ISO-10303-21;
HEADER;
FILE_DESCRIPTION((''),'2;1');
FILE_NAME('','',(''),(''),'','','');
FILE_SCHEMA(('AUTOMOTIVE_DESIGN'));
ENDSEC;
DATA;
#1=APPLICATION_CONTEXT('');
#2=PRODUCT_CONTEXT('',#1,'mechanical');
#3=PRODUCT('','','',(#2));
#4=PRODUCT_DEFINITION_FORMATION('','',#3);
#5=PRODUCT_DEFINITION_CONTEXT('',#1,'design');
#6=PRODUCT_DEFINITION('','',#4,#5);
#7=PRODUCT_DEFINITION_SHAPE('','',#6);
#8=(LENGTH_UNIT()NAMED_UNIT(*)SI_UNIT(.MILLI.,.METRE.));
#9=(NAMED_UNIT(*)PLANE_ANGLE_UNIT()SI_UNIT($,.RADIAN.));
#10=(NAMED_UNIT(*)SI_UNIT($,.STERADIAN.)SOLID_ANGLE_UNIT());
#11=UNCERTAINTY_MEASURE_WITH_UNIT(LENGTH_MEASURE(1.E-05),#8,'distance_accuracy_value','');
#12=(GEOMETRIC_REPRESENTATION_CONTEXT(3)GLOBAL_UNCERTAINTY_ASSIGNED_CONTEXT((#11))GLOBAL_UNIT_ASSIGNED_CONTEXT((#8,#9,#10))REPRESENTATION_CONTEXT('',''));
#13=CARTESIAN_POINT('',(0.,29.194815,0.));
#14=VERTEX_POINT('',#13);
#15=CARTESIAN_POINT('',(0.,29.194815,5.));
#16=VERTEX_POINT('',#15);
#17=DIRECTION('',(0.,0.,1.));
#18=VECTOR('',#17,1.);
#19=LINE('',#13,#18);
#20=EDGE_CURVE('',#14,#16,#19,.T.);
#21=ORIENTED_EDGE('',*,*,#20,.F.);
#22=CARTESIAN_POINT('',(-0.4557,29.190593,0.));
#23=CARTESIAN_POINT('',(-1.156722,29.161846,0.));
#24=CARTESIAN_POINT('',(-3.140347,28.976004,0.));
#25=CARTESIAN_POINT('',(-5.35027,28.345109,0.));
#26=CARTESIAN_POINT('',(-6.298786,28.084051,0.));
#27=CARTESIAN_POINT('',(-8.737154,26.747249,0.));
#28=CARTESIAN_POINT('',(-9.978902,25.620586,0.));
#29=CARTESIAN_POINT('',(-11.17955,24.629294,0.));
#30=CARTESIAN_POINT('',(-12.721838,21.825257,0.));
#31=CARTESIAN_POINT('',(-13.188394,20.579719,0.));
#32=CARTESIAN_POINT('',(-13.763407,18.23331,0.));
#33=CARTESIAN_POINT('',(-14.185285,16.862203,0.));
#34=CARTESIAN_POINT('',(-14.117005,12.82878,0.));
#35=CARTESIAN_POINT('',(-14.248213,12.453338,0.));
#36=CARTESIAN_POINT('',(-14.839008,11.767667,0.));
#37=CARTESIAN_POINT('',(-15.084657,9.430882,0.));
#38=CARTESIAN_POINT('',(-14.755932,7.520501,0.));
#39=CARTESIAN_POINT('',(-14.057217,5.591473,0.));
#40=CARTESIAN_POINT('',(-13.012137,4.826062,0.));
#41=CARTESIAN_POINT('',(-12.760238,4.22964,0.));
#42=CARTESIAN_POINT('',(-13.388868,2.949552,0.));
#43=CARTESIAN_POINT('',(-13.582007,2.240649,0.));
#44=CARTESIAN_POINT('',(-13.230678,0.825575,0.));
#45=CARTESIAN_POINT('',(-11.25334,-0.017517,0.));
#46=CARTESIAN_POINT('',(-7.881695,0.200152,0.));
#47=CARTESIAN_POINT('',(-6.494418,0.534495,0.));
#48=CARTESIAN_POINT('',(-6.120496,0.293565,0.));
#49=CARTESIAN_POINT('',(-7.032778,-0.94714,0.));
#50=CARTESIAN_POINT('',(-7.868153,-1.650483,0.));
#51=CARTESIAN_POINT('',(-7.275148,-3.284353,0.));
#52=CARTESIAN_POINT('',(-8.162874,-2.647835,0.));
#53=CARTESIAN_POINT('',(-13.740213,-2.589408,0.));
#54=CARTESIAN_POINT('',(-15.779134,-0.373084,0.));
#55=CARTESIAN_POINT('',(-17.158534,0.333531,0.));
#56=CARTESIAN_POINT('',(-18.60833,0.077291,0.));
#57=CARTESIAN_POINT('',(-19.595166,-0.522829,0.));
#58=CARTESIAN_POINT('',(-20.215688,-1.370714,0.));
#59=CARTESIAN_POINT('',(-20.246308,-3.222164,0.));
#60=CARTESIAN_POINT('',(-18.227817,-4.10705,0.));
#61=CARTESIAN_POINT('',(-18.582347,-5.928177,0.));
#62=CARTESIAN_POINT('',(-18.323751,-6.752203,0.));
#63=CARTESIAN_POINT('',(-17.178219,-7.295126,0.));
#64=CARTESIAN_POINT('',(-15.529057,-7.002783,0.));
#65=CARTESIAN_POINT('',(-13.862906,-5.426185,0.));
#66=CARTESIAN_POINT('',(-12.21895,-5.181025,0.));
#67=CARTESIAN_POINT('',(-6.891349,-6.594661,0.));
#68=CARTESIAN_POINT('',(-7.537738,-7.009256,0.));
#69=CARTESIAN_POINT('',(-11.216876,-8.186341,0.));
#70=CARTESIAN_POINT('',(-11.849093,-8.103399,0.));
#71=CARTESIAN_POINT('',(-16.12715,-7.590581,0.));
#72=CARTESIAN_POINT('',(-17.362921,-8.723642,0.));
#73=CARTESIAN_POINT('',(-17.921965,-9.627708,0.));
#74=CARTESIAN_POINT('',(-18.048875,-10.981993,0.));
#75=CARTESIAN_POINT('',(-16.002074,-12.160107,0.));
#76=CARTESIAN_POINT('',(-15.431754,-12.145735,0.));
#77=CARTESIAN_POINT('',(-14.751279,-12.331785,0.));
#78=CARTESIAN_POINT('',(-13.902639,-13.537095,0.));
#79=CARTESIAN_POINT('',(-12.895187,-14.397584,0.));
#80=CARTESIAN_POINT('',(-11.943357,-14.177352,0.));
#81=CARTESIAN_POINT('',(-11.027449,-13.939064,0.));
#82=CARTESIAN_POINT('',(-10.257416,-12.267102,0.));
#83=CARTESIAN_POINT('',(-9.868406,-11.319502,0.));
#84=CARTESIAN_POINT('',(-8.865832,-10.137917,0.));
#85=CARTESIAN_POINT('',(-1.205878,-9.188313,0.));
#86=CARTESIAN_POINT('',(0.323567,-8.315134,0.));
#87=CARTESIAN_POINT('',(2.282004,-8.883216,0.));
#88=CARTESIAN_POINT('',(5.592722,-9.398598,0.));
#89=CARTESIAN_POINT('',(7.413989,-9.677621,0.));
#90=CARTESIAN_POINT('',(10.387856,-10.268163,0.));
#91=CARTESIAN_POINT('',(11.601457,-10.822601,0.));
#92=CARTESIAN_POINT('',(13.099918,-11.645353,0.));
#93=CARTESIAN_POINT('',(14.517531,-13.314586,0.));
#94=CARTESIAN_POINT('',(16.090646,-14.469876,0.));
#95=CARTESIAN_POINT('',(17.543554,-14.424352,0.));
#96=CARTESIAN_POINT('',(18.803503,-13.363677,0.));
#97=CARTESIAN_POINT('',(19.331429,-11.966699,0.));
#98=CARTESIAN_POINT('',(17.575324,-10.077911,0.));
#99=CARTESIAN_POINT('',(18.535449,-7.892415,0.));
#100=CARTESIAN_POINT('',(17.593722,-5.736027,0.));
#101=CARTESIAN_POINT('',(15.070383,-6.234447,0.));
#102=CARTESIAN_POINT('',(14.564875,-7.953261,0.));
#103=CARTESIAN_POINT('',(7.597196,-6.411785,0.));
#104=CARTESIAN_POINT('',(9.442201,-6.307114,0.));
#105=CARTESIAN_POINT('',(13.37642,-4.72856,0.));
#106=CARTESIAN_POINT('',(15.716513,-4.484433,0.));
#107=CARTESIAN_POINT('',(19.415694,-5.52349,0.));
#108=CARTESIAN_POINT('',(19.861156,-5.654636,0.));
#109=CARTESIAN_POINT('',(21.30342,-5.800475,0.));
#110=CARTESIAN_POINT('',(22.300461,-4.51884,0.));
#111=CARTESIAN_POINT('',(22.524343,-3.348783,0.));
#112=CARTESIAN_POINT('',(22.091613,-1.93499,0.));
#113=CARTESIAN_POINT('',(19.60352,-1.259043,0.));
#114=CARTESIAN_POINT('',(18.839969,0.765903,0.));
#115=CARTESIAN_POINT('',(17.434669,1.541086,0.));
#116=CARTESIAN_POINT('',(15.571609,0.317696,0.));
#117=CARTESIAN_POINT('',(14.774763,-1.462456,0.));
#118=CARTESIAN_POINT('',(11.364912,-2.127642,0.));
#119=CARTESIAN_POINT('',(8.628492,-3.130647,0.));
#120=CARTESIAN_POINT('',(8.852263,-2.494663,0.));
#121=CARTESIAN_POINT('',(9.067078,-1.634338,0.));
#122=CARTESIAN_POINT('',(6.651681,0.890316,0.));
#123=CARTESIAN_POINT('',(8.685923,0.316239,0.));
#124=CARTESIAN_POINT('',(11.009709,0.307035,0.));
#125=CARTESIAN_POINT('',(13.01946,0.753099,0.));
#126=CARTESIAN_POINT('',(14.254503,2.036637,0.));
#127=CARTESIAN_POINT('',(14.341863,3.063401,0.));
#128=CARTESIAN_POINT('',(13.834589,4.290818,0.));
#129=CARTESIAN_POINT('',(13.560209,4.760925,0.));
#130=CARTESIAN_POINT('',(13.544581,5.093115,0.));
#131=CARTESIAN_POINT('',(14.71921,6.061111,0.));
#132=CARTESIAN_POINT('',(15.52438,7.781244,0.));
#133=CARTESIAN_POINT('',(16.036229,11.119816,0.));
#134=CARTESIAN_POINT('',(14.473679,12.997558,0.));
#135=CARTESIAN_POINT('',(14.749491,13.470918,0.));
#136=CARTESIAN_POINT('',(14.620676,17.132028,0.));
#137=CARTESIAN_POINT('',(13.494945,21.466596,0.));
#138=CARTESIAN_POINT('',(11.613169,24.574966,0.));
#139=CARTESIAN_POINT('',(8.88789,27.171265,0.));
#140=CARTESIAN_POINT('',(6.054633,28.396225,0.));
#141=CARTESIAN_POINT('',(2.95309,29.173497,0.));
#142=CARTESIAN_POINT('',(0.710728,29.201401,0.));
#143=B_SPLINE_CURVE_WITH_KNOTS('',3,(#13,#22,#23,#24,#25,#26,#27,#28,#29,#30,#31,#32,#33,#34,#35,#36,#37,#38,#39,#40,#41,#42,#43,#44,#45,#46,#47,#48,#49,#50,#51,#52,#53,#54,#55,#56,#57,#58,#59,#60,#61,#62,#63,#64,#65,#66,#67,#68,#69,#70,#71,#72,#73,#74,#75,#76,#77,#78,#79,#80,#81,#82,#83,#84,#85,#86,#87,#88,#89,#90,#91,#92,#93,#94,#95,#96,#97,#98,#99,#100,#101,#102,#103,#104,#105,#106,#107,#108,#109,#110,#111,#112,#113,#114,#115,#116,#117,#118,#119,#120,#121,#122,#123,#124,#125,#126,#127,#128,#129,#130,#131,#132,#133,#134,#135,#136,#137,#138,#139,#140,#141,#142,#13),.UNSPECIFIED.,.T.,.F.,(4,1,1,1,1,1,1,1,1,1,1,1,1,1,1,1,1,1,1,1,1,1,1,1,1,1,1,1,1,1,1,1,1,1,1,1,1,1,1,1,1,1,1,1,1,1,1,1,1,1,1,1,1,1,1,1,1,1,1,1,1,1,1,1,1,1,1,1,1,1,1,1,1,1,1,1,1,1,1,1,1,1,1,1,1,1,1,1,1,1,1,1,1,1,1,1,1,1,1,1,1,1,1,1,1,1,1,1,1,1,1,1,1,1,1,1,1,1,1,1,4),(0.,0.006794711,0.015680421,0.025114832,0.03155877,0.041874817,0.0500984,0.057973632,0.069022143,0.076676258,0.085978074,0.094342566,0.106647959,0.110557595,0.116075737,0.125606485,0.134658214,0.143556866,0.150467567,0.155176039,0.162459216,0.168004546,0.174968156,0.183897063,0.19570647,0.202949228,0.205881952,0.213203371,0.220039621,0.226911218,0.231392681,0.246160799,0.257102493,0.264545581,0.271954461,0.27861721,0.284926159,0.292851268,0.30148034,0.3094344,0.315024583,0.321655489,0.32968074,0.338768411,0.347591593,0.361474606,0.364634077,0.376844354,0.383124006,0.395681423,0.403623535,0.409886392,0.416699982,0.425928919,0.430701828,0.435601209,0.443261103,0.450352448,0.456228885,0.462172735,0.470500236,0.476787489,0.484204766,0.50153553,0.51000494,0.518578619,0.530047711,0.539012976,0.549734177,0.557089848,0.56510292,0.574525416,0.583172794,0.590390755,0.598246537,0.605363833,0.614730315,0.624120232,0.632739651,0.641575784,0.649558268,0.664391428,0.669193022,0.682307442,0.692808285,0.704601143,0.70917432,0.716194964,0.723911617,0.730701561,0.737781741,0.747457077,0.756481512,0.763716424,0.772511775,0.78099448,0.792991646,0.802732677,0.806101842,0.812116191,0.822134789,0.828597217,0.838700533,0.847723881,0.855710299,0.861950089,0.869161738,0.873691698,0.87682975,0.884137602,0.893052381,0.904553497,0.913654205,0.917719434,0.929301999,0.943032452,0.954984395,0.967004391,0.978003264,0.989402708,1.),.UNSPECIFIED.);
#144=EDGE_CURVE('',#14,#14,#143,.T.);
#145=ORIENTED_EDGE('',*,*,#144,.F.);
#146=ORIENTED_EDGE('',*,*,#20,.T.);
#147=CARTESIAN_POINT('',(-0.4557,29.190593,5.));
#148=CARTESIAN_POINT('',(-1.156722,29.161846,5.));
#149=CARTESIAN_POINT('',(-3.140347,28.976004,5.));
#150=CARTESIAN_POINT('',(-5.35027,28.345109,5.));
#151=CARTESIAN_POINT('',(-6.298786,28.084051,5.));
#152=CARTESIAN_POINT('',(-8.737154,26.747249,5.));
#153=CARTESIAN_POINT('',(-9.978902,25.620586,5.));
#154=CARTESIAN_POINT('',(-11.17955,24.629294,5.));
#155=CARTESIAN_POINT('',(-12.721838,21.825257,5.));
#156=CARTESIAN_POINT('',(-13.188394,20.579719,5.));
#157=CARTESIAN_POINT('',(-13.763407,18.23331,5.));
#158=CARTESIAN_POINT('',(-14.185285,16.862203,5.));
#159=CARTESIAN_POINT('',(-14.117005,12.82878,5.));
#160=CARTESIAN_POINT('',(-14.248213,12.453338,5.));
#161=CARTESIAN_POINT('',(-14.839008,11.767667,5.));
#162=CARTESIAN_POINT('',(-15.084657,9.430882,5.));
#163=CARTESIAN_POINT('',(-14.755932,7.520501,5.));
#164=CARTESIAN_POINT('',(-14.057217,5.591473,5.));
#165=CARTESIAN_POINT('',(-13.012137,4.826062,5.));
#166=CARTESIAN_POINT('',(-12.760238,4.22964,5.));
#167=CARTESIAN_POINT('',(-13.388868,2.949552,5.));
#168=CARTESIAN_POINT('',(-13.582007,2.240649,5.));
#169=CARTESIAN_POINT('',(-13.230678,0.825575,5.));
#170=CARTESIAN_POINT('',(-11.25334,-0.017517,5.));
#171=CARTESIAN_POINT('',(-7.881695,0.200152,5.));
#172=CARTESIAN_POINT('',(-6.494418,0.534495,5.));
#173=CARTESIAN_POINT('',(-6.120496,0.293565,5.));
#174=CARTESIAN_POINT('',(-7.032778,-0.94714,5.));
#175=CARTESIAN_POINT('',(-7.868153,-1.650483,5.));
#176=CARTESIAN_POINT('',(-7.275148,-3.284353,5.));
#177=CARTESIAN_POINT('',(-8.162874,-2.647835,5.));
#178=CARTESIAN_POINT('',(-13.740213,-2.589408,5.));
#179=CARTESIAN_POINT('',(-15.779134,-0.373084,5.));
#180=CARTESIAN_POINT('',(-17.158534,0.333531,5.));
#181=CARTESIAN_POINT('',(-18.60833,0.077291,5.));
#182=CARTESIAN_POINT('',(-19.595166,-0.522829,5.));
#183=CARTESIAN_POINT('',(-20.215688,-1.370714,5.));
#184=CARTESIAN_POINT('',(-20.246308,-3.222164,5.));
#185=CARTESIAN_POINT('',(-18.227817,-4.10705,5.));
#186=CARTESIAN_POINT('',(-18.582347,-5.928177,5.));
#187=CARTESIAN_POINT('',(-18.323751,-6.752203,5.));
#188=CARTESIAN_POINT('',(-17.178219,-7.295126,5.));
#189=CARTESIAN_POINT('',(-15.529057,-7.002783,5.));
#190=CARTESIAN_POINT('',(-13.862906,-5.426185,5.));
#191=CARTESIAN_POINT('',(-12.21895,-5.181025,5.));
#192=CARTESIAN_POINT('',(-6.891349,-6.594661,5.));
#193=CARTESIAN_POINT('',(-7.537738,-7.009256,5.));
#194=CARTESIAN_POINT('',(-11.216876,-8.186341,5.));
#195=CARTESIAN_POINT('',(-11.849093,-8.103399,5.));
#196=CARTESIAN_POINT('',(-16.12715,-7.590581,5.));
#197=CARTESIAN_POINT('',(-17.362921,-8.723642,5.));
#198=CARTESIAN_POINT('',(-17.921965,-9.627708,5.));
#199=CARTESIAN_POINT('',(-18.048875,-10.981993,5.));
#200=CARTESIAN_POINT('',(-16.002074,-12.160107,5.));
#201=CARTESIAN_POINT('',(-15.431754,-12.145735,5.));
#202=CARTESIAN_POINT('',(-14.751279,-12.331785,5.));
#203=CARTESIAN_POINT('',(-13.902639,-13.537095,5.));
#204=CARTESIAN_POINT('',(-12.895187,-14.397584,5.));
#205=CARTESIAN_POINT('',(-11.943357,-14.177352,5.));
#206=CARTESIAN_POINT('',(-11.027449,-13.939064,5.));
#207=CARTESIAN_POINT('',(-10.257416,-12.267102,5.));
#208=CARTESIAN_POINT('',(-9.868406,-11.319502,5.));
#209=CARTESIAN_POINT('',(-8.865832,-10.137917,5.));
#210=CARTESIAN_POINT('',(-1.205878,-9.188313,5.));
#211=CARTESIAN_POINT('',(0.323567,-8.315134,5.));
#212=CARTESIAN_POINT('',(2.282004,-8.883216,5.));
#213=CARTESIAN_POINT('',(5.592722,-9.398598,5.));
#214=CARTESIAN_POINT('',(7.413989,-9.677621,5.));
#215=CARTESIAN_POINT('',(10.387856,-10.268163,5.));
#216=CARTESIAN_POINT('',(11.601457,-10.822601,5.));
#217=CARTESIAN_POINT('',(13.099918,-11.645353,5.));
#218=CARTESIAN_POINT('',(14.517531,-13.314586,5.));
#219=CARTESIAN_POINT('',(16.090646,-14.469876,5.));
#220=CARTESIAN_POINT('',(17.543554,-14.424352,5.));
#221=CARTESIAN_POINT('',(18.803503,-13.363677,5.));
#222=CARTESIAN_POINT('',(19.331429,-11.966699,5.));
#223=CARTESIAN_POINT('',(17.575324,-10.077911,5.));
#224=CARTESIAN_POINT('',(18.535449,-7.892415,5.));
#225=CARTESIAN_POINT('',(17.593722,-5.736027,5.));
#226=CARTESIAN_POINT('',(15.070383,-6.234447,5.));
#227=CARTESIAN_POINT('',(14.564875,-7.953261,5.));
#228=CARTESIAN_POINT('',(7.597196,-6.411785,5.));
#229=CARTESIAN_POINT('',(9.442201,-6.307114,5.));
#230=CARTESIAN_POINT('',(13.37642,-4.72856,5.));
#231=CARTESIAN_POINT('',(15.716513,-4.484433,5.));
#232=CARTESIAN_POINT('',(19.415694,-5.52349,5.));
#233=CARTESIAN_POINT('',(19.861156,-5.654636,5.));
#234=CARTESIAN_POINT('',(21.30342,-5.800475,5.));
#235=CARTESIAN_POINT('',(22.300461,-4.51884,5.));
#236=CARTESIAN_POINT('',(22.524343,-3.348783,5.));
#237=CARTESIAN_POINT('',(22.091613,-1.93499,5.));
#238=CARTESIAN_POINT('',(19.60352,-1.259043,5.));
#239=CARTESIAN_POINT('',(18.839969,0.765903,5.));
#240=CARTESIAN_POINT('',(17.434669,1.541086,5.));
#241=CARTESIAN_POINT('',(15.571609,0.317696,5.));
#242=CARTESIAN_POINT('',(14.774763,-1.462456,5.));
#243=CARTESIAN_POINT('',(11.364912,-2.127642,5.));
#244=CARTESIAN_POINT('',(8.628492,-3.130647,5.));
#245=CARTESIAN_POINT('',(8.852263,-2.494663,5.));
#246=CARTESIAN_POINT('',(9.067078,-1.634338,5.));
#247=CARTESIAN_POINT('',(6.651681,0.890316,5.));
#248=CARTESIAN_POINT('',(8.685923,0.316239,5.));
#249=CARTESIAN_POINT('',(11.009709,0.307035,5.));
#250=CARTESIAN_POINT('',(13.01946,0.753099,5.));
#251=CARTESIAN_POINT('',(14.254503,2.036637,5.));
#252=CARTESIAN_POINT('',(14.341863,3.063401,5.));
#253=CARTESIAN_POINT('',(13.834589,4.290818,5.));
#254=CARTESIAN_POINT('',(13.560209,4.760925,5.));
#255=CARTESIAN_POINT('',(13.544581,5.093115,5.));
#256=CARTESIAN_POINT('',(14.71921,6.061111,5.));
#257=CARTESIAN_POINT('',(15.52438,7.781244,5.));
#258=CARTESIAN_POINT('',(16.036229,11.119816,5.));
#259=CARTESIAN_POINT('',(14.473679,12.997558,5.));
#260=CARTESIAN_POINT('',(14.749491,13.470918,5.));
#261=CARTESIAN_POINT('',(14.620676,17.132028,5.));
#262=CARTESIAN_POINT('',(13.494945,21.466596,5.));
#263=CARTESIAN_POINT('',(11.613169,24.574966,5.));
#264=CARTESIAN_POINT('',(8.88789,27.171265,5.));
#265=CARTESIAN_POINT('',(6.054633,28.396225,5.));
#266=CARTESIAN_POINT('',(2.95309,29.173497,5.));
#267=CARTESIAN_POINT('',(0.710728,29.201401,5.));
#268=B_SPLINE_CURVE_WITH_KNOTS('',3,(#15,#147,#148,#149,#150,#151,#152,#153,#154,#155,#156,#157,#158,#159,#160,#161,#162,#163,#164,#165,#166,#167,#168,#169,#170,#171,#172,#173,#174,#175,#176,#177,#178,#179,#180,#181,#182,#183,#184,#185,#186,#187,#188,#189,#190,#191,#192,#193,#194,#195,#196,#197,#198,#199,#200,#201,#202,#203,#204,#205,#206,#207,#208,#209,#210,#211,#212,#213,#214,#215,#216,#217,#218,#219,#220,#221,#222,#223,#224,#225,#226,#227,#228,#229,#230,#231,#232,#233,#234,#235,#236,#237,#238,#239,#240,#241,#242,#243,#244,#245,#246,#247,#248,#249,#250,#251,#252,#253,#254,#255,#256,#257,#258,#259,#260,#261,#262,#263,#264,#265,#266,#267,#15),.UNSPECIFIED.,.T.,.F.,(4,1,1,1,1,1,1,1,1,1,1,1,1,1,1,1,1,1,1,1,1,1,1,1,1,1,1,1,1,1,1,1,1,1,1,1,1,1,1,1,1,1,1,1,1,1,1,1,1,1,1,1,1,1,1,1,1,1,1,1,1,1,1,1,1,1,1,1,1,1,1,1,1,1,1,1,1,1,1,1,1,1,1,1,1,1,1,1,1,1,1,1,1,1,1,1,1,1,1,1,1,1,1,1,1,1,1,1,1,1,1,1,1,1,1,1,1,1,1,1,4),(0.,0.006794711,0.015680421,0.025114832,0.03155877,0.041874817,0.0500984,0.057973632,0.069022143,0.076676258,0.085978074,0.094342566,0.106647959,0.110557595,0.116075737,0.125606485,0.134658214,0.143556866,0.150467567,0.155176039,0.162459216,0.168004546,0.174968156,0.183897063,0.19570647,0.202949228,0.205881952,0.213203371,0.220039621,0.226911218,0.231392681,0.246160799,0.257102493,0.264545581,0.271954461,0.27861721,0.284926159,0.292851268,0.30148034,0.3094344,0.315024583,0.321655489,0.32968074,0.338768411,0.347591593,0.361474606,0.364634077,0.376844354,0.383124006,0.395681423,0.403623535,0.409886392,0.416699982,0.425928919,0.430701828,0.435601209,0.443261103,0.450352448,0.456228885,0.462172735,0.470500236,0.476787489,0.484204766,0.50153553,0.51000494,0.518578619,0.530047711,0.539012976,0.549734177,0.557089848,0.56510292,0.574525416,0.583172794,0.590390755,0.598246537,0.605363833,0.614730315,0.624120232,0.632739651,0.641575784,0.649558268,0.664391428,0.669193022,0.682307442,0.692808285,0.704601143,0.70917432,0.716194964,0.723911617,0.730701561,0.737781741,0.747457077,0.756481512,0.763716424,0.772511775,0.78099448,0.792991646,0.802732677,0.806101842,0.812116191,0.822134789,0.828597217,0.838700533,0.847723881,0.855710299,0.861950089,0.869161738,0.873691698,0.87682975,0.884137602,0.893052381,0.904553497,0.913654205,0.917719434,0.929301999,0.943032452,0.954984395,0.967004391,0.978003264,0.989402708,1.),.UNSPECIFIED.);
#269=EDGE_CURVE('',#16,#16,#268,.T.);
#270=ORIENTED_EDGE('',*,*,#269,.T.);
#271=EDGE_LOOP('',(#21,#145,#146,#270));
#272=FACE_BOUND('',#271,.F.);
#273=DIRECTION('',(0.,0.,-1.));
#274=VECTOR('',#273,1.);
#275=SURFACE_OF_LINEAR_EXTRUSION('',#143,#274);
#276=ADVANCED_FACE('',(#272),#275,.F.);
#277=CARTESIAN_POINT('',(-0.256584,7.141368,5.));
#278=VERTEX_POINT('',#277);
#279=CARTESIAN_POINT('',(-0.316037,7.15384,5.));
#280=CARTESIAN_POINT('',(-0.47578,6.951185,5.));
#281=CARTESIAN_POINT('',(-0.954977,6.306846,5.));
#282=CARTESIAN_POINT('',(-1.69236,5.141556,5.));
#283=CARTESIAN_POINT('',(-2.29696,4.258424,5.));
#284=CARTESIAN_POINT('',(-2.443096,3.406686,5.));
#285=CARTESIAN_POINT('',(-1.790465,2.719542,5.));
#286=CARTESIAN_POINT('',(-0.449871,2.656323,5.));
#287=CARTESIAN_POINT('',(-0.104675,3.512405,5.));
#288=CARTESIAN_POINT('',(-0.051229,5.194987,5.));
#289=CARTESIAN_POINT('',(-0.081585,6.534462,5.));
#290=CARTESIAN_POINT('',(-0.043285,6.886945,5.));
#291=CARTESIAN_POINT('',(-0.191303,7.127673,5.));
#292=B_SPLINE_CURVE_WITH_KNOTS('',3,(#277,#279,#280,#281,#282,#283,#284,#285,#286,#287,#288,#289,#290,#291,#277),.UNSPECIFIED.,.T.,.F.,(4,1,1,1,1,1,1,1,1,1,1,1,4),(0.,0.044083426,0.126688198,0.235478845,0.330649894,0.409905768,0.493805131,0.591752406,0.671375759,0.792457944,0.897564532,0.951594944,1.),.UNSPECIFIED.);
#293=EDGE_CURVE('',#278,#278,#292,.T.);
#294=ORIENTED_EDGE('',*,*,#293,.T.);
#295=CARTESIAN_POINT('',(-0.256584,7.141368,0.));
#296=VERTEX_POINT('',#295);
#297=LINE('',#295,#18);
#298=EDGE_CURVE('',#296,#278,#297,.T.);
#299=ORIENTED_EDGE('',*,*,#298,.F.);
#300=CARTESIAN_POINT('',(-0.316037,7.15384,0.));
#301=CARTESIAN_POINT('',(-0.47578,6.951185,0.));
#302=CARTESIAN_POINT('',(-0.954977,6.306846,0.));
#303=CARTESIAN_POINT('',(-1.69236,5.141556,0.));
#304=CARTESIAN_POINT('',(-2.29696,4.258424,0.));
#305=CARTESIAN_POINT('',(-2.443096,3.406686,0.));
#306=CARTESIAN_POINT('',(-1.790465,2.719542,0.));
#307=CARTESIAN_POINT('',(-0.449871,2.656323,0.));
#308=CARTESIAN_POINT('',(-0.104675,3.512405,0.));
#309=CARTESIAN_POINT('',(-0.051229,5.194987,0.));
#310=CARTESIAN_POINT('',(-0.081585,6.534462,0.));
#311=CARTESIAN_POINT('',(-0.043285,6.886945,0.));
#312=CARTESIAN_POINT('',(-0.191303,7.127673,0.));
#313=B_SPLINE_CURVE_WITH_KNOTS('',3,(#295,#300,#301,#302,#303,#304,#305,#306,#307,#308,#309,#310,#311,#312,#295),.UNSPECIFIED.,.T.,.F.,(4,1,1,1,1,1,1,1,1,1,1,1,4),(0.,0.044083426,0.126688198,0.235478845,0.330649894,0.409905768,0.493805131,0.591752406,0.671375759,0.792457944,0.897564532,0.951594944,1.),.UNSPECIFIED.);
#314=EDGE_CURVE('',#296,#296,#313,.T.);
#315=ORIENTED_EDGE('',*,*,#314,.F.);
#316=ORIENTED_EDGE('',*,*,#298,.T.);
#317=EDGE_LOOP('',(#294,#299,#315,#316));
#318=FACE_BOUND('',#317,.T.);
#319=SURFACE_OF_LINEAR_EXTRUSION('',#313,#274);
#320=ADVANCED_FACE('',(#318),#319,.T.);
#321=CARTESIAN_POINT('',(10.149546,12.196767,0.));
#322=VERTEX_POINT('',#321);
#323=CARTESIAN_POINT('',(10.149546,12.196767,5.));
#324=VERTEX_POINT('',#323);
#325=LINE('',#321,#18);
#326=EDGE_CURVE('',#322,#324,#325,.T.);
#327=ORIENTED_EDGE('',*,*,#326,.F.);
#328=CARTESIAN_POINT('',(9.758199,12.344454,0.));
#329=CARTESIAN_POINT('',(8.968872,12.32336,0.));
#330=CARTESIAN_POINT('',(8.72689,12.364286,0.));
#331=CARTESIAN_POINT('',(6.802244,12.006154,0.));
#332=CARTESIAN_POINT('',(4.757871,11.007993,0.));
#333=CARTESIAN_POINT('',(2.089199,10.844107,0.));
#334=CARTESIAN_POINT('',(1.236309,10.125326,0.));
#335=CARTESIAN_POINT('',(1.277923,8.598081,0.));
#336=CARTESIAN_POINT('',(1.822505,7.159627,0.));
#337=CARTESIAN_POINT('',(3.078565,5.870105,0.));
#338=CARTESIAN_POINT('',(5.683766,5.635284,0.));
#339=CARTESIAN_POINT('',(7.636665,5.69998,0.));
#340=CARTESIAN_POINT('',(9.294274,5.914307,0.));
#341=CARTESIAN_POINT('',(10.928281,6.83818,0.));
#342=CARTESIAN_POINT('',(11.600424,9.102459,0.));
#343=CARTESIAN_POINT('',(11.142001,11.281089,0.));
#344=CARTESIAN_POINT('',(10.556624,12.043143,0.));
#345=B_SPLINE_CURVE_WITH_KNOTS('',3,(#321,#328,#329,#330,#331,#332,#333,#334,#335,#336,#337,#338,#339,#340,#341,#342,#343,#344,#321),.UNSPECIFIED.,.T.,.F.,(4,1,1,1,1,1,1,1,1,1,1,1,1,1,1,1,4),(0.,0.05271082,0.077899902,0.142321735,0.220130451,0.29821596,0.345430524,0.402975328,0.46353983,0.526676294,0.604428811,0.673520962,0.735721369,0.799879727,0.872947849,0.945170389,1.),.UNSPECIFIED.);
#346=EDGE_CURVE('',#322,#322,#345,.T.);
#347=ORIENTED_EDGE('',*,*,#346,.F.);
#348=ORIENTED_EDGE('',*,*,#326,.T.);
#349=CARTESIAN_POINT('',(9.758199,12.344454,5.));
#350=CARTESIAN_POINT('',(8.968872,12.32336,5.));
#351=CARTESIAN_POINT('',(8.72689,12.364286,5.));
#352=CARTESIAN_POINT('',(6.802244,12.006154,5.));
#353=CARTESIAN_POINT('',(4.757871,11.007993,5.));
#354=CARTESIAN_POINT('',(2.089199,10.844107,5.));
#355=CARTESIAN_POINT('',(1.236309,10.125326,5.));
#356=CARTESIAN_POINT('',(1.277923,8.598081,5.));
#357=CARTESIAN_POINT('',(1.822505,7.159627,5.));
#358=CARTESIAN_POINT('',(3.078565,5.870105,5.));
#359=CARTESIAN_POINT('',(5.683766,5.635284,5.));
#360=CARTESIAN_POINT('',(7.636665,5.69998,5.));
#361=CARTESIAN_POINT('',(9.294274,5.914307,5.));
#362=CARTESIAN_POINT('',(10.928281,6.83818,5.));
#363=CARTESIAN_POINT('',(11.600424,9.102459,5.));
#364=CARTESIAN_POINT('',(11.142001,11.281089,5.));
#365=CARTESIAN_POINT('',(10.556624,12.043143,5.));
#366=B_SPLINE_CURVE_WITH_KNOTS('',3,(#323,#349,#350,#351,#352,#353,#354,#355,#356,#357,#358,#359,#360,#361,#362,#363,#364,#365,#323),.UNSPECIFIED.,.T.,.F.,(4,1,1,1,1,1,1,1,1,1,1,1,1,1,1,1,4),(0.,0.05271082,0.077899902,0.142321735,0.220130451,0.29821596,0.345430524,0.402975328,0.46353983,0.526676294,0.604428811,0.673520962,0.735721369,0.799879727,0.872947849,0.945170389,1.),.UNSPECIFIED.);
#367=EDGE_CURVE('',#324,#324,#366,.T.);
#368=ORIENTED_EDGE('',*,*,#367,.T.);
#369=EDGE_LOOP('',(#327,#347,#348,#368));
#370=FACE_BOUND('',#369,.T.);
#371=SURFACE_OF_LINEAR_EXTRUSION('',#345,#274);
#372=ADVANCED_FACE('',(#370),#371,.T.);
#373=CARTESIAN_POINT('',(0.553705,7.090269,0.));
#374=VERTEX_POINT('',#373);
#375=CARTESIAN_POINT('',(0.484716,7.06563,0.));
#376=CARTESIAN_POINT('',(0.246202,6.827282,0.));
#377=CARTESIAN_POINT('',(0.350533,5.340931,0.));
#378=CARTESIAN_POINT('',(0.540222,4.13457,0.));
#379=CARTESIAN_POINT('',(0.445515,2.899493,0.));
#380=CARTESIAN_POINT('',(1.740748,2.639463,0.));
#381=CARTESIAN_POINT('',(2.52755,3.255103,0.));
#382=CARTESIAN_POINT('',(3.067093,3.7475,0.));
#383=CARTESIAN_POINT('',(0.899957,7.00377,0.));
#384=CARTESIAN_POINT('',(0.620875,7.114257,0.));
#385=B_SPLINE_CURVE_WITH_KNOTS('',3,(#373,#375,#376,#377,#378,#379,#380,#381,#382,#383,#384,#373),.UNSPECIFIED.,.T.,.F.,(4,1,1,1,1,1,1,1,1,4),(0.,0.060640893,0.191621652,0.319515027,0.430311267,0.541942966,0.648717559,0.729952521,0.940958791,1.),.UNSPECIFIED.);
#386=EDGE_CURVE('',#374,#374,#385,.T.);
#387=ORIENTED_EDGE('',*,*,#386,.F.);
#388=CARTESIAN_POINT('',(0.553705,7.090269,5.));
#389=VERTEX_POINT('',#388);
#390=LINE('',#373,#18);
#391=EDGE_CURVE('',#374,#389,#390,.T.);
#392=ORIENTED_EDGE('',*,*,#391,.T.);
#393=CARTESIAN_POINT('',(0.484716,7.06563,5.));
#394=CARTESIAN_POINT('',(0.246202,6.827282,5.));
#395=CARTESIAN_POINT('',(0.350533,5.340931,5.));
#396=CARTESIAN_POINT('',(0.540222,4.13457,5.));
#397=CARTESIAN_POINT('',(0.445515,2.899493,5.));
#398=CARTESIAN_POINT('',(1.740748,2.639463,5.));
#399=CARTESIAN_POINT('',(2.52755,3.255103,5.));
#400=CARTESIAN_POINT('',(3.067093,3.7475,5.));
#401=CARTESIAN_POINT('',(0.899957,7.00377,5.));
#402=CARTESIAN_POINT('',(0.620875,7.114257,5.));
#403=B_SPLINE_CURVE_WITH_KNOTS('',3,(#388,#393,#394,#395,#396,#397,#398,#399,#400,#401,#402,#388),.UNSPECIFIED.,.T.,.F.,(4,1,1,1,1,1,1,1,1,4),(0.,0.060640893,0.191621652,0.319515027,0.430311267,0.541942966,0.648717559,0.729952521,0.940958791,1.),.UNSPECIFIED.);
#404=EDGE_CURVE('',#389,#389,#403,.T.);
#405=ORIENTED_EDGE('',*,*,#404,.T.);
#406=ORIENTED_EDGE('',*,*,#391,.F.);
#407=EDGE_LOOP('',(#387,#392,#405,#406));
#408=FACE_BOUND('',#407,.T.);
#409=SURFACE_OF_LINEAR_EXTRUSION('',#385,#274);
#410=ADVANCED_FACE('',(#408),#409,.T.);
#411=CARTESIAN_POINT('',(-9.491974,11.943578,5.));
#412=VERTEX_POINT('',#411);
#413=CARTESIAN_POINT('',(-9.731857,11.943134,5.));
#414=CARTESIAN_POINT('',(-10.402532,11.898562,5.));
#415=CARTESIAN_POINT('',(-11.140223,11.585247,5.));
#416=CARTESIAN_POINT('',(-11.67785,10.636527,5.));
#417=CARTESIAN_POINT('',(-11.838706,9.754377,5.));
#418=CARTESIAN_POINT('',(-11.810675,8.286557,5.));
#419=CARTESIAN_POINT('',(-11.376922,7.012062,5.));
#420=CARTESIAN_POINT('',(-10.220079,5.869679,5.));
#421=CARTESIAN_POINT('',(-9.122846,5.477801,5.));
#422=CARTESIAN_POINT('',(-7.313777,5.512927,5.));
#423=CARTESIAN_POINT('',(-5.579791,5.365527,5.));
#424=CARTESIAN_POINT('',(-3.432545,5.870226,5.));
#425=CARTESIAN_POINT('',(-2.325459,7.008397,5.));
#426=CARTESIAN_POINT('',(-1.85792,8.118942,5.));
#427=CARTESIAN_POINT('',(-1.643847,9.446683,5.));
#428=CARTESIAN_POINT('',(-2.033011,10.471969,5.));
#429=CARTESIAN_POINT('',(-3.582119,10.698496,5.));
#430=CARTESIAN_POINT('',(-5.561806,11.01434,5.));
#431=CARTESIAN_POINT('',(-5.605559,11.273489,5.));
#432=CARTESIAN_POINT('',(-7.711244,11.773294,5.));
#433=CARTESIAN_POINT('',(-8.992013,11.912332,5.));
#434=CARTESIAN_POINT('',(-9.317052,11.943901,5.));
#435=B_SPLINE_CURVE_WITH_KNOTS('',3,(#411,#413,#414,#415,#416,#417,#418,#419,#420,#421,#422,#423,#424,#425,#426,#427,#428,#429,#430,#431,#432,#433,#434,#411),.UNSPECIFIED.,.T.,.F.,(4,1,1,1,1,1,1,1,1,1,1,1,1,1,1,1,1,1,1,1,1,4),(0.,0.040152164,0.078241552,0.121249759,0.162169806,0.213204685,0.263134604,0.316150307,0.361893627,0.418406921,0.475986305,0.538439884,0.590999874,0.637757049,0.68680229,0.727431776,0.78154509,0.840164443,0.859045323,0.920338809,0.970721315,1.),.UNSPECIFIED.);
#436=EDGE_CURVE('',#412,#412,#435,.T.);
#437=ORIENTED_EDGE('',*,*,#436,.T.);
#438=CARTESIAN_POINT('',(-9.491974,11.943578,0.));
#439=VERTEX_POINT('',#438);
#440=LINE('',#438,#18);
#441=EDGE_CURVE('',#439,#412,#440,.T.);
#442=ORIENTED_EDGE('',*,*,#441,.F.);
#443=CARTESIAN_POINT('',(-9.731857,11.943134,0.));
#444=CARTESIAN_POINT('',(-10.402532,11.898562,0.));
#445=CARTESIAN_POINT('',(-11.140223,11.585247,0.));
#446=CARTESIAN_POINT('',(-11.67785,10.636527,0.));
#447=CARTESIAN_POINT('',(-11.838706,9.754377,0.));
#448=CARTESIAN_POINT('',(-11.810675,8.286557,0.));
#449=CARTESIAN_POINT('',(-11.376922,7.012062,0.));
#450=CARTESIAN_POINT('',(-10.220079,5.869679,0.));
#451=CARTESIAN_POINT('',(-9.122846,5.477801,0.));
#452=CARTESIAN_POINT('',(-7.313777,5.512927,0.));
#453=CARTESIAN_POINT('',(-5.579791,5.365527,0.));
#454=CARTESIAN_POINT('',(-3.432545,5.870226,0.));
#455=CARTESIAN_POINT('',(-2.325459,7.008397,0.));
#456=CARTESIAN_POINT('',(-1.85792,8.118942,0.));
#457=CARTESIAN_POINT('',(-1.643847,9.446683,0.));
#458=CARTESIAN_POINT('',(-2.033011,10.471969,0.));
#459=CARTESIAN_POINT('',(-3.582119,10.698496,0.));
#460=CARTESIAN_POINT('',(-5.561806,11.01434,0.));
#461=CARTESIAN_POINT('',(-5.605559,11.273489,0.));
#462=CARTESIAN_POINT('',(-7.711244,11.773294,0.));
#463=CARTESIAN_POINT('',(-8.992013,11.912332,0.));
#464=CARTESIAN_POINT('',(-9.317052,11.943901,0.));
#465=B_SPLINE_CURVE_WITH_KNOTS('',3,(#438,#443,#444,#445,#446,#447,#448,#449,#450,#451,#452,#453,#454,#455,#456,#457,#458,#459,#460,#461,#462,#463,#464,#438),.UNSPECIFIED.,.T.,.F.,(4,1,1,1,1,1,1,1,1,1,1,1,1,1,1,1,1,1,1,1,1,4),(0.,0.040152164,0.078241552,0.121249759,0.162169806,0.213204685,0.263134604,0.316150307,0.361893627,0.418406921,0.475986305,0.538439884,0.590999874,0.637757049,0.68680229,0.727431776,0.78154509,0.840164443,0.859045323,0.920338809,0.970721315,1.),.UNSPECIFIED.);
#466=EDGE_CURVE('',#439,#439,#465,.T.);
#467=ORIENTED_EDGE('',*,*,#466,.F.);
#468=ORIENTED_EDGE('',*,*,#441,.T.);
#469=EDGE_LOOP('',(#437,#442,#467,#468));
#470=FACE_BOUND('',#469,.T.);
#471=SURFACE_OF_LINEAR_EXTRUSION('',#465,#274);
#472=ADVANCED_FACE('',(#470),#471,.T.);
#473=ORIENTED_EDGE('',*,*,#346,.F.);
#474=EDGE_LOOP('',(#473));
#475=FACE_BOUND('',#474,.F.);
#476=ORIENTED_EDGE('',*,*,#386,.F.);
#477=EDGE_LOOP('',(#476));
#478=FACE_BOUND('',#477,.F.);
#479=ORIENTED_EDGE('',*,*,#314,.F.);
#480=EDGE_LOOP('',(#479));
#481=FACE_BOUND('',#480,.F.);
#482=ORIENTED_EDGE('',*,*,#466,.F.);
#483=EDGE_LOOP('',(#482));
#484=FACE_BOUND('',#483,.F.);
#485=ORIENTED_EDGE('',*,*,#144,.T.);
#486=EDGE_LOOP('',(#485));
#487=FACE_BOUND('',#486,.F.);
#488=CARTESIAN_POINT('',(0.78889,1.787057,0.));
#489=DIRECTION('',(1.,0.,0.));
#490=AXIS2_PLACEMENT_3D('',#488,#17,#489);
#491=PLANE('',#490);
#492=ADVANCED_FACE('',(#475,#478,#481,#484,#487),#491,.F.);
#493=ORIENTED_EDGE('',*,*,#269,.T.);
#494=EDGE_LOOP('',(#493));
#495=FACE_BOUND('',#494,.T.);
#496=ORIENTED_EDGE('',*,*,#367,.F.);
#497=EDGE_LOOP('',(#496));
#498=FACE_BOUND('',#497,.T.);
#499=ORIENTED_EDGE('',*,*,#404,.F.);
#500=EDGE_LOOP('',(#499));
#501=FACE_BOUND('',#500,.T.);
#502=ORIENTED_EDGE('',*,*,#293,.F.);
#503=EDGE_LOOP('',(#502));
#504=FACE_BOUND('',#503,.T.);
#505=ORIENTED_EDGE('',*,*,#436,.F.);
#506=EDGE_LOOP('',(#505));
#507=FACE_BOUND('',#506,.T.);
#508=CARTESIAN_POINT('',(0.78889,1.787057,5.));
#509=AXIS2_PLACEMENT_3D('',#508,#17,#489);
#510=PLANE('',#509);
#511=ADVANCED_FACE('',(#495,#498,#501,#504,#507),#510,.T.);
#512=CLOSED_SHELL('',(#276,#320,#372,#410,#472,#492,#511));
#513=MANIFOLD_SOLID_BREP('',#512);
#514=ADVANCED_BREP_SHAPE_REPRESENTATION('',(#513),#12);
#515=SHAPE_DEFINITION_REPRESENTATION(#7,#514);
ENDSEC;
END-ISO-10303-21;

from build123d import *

# Parameters (mm, degrees)
F2_DEPTH = 5


# Not quite as in the source:
# - the program builds the solid bodies; features that only make, move or delete a surface that nothing else refers to are left out


with BuildPart() as f2:
    # F0 (on Top) → F2 (new body)
    with BuildSketch(Plane.XY):
        with BuildLine():
            add(Edge.make_bspline(
                [(0, 29.1948150843), (-0.455700376, 29.1905925458), (-1.1567215924, 29.1618461529), (-3.1403467697, 28.9760038822), (-5.3502695562, 28.3451092019), (-6.2987855508, 28.08405076), (-8.7371541954, 26.7472490664), (-9.9789020308, 25.6205862946), (-11.1795496875, 24.6292942159), (-12.7218376486, 21.8252572969), (-13.1883939862, 20.579718657), (-13.7634070057, 18.2333096853), (-14.1852851071, 16.8622027364), (-14.1170047877, 12.8287797099), (-14.2482133356, 12.4533380127), (-14.8390084605, 11.7676672429), (-15.0846571902, 9.4308819888), (-14.7559319963, 7.5205014424), (-14.0572172751, 5.5914730666), (-13.0121365975, 4.8260616544), (-12.7602375114, 4.229640466), (-13.3888684676, 2.9495519697), (-13.5820065327, 2.2406487992), (-13.2306782333, 0.8255751981), (-11.2533403548, -0.0175168629), (-7.8816952761, 0.2001522646), (-6.4944183105, 0.5344949605), (-6.1204957666, 0.2935652285), (-7.0327782743, -0.9471395034), (-7.8681534364, -1.650483246), (-7.2751479554, -3.2843527943), (-8.1628741959, -2.6478349983), (-13.7402125566, -2.5894083194), (-15.7791340083, -0.3730836673), (-17.1585341356, 0.3335309748), (-18.6083298281, 0.0772907355), (-19.5951663859, -0.5228293797), (-20.2156875042, -1.3707138004), (-20.2463078231, -3.2221635924), (-18.2278171957, -4.1070504005), (-18.5823469671, -5.9281770774), (-18.3237505227, -6.7522032766), (-17.1782189553, -7.2951260169), (-15.5290572679, -7.0027828669), (-13.8629059388, -5.4261850537), (-12.2189503414, -5.1810247155), (-6.8913491283, -6.5946613819), (-7.5377381272, -7.0092561754), (-11.2168759239, -8.1863406129), (-11.8490931224, -8.1033994548), (-16.1271497353, -7.5905806702), (-17.3629207849, -8.7236417952), (-17.9219651644, -9.6277084995), (-18.0488749277, -10.9819934587), (-16.0020742728, -12.1601073407), (-15.4317544768, -12.1457345363), (-14.7512786345, -12.3317850721), (-13.9026392621, -13.5370953675), (-12.8951873314, -14.3975838856), (-11.9433573754, -14.177352226), (-11.0274493069, -13.9390642999), (-10.2574160991, -12.2671019175), (-9.8684058522, -11.3195018224), (-8.8658318822, -10.1379170413), (-1.2058784185, -9.1883129388), (0.3235668746, -8.3151335086), (2.2820035826, -8.8832158896), (5.5927219878, -9.3985978575), (7.4139892784, -9.6776207077), (10.3878555066, -10.2681628014), (11.6014567723, -10.8226010538), (13.0999184497, -11.645353175), (14.5175313676, -13.3145860992), (16.0906457526, -14.4698757402), (17.5435543548, -14.4243517005), (18.8035028973, -13.3636768778), (19.3314294433, -11.9666989236), (17.5753238972, -10.0779106532), (18.5354487794, -7.8924152647), (17.5937222417, -5.7360265957), (15.0703828771, -6.234446849), (14.5648753095, -7.953261075), (7.5971964752, -6.4117846293), (9.442200865, -6.3071141647), (13.3764202735, -4.7285595175), (15.716513279, -4.4844330359), (19.4156937792, -5.5234901434), (19.861155828, -5.6546360397), (21.303419766, -5.8004753827), (22.300460868, -4.518839727), (22.5243431369, -3.3487826511), (22.0916128896, -1.9349896886), (19.6035203653, -1.2590429946), (18.8399693891, 0.765903237), (17.4346694984, 1.5410863929), (15.5716090748, 0.3176959724), (14.7747626125, -1.4624555319), (11.3649118248, -2.1276417927), (8.6284919308, -3.1306467762), (8.8522629011, -2.4946634527), (9.0670777263, -1.6343380568), (6.6516812, 0.8903161082), (8.6859227155, 0.3162393757), (11.0097092584, 0.3070352004), (13.019460402, 0.7530993219), (14.2545025425, 2.0366374807), (14.3418632854, 3.0634006451), (13.8345888548, 4.2908181196), (13.5602088632, 4.7609245882), (13.5445813704, 5.0931152788), (14.7192104011, 6.0611113985), (15.5243795175, 7.7812436707), (16.0362288926, 11.1198158729), (14.473678678, 12.9975581843), (14.749490572, 13.4709184724), (14.6206756183, 17.1320281508), (13.4949448137, 21.4665955495), (11.613169172, 24.5749660361), (8.8878900036, 27.1712648948), (6.0546332528, 28.3962254244), (2.9530896675, 29.173496563), (0.7107278145, 29.2014007177), (0, 29.1948150843)],
                knots=[0, 0, 0, 0, 0.0067947108, 0.0156804207, 0.0251148324, 0.0315587701, 0.0418748165, 0.0500983998, 0.0579736325, 0.0690221426, 0.0766762585, 0.0859780744, 0.0943425662, 0.1066479587, 0.1105575947, 0.1160757372, 0.1256064852, 0.1346582143, 0.1435568663, 0.1504675672, 0.1551760394, 0.162459216, 0.1680045462, 0.1749681561, 0.1838970634, 0.19570647, 0.2029492284, 0.2058819519, 0.2132033711, 0.220039621, 0.2269112182, 0.2313926808, 0.2461607994, 0.2571024927, 0.264545581, 0.2719544608, 0.2786172102, 0.2849261587, 0.2928512682, 0.3014803403, 0.3094344002, 0.3150245827, 0.3216554892, 0.3296807402, 0.3387684105, 0.3475915932, 0.3614746058, 0.3646340772, 0.3768443544, 0.383124006, 0.3956814227, 0.403623535, 0.4098863918, 0.416699982, 0.4259289189, 0.4307018278, 0.4356012085, 0.4432611025, 0.4503524484, 0.4562288853, 0.4621727355, 0.4705002364, 0.4767874895, 0.4842047659, 0.5015355296, 0.5100049396, 0.5185786191, 0.5300477109, 0.5390129764, 0.5497341771, 0.5570898483, 0.5651029201, 0.5745254162, 0.5831727936, 0.5903907555, 0.598246537, 0.6053638329, 0.614730315, 0.6241202322, 0.6327396515, 0.641575784, 0.6495582683, 0.6643914285, 0.6691930217, 0.682307442, 0.6928082846, 0.7046011432, 0.7091743205, 0.7161949635, 0.7239116167, 0.7307015612, 0.7377817415, 0.7474570773, 0.7564815119, 0.7637164238, 0.7725117749, 0.7809944805, 0.7929916457, 0.8027326768, 0.8061018421, 0.8121161908, 0.8221347891, 0.828597217, 0.8387005328, 0.8477238813, 0.8557102992, 0.8619500889, 0.8691617381, 0.8736916981, 0.8768297501, 0.8841376024, 0.8930523815, 0.9045534974, 0.9136542049, 0.917719434, 0.929301999, 0.9430324516, 0.9549843951, 0.9670043906, 0.9780032637, 0.9894027079, 1, 1, 1, 1], degree=3))
        make_face()
        with BuildLine():
            add(Edge.make_bspline(
                [(-0.256584317, 7.141367998), (-0.3160373469, 7.1538403671), (-0.4757799103, 6.9511854635), (-0.9549769091, 6.3068464939), (-1.6923599308, 5.1415561247), (-2.2969604587, 4.2584240453), (-2.4430958311, 3.4066857737), (-1.7904651594, 2.7195420637), (-0.4498707313, 2.6563231111), (-0.1046752505, 3.5124050288), (-0.0512294187, 5.1949870786), (-0.0815848313, 6.5344615874), (-0.0432850893, 6.8869453377), (-0.1913029283, 7.1276729251), (-0.256584317, 7.141367998)],
                knots=[0, 0, 0, 0, 0.0440834259, 0.1266881981, 0.2354788451, 0.3306498943, 0.4099057678, 0.4938051313, 0.5917524056, 0.6713757591, 0.7924579444, 0.8975645323, 0.9515949438, 1, 1, 1, 1], degree=3))
        make_face(mode=Mode.SUBTRACT)
        with BuildLine():
            add(Edge.make_bspline(
                [(0.5537052057, 7.0902686566), (0.4847157086, 7.065629918), (0.2462017696, 6.8272821787), (0.3505334284, 5.3409308334), (0.5402222252, 4.1345701722), (0.4455145051, 2.8994930838), (1.7407481462, 2.6394633793), (2.5275495977, 3.2551031165), (3.0670934574, 3.747499506), (0.899957098, 7.0037701506), (0.6208747848, 7.1142574343), (0.5537052057, 7.0902686566)],
                knots=[0, 0, 0, 0, 0.0606408934, 0.1916216523, 0.3195150268, 0.4303112671, 0.541942966, 0.6487175585, 0.729952521, 0.9409587914, 1, 1, 1, 1], degree=3))
        make_face(mode=Mode.SUBTRACT)
        with BuildLine():
            add(Edge.make_bspline(
                [(-9.4919735566, 11.9435777888), (-9.731856646, 11.9431339793), (-10.4025316241, 11.8985617041), (-11.1402226353, 11.585247135), (-11.6778499919, 10.6365273222), (-11.8387057244, 9.7543773642), (-11.8106747115, 8.2865570084), (-11.3769216794, 7.0120622529), (-10.2200794327, 5.8696790086), (-9.1228460064, 5.4778012806), (-7.3137774926, 5.512926788), (-5.5797910502, 5.3655267511), (-3.4325454861, 5.8702256548), (-2.3254590339, 7.008396917), (-1.8579200144, 8.1189424147), (-1.6438471983, 9.4466829035), (-2.0330106022, 10.471969184), (-3.5821192175, 10.6984959081), (-5.5618055504, 11.014339873), (-5.6055589145, 11.2734889759), (-7.7112442008, 11.7732942818), (-8.9920132873, 11.9123324613), (-9.3170524373, 11.9439014117), (-9.4919735566, 11.9435777888)],
                knots=[0, 0, 0, 0, 0.0401521642, 0.0782415524, 0.1212497591, 0.1621698062, 0.2132046853, 0.2631346044, 0.3161503068, 0.3618936274, 0.4184069205, 0.475986305, 0.5384398841, 0.5909998739, 0.6377570486, 0.6868022904, 0.7274317757, 0.7815450895, 0.8401644428, 0.8590453231, 0.920338809, 0.9707213146, 1, 1, 1, 1], degree=3))
        make_face(mode=Mode.SUBTRACT)
        with BuildLine():
            add(Edge.make_bspline(
                [(10.1495459676, 12.1967671439), (9.758199193, 12.3444542925), (8.9688719183, 12.3233603524), (8.7268898602, 12.3642856595), (6.8022443568, 12.0061540246), (4.7578706539, 11.0079932867), (2.0891989848, 10.8441071968), (1.2363093366, 10.1253259437), (1.2779229329, 8.5980810624), (1.8225051082, 7.1596266297), (3.078564706, 5.8701046484), (5.6837658037, 5.6352842722), (7.6366652334, 5.6999795852), (9.2942736505, 5.9143070841), (10.9282809854, 6.8381797704), (11.600424083, 9.1024585372), (11.1420008579, 11.2810889964), (10.5566235185, 12.0431434867), (10.1495459676, 12.1967671439)],
                knots=[0, 0, 0, 0, 0.0527108202, 0.0778999016, 0.1423217348, 0.2201304511, 0.2982159596, 0.3454305238, 0.4029753283, 0.4635398297, 0.5266762941, 0.6044288108, 0.6735209616, 0.7357213687, 0.7998797274, 0.8729478494, 0.9451703885, 1, 1, 1, 1], degree=3))
        make_face(mode=Mode.SUBTRACT)
    extrude(amount=F2_DEPTH)


solid = f2.part
